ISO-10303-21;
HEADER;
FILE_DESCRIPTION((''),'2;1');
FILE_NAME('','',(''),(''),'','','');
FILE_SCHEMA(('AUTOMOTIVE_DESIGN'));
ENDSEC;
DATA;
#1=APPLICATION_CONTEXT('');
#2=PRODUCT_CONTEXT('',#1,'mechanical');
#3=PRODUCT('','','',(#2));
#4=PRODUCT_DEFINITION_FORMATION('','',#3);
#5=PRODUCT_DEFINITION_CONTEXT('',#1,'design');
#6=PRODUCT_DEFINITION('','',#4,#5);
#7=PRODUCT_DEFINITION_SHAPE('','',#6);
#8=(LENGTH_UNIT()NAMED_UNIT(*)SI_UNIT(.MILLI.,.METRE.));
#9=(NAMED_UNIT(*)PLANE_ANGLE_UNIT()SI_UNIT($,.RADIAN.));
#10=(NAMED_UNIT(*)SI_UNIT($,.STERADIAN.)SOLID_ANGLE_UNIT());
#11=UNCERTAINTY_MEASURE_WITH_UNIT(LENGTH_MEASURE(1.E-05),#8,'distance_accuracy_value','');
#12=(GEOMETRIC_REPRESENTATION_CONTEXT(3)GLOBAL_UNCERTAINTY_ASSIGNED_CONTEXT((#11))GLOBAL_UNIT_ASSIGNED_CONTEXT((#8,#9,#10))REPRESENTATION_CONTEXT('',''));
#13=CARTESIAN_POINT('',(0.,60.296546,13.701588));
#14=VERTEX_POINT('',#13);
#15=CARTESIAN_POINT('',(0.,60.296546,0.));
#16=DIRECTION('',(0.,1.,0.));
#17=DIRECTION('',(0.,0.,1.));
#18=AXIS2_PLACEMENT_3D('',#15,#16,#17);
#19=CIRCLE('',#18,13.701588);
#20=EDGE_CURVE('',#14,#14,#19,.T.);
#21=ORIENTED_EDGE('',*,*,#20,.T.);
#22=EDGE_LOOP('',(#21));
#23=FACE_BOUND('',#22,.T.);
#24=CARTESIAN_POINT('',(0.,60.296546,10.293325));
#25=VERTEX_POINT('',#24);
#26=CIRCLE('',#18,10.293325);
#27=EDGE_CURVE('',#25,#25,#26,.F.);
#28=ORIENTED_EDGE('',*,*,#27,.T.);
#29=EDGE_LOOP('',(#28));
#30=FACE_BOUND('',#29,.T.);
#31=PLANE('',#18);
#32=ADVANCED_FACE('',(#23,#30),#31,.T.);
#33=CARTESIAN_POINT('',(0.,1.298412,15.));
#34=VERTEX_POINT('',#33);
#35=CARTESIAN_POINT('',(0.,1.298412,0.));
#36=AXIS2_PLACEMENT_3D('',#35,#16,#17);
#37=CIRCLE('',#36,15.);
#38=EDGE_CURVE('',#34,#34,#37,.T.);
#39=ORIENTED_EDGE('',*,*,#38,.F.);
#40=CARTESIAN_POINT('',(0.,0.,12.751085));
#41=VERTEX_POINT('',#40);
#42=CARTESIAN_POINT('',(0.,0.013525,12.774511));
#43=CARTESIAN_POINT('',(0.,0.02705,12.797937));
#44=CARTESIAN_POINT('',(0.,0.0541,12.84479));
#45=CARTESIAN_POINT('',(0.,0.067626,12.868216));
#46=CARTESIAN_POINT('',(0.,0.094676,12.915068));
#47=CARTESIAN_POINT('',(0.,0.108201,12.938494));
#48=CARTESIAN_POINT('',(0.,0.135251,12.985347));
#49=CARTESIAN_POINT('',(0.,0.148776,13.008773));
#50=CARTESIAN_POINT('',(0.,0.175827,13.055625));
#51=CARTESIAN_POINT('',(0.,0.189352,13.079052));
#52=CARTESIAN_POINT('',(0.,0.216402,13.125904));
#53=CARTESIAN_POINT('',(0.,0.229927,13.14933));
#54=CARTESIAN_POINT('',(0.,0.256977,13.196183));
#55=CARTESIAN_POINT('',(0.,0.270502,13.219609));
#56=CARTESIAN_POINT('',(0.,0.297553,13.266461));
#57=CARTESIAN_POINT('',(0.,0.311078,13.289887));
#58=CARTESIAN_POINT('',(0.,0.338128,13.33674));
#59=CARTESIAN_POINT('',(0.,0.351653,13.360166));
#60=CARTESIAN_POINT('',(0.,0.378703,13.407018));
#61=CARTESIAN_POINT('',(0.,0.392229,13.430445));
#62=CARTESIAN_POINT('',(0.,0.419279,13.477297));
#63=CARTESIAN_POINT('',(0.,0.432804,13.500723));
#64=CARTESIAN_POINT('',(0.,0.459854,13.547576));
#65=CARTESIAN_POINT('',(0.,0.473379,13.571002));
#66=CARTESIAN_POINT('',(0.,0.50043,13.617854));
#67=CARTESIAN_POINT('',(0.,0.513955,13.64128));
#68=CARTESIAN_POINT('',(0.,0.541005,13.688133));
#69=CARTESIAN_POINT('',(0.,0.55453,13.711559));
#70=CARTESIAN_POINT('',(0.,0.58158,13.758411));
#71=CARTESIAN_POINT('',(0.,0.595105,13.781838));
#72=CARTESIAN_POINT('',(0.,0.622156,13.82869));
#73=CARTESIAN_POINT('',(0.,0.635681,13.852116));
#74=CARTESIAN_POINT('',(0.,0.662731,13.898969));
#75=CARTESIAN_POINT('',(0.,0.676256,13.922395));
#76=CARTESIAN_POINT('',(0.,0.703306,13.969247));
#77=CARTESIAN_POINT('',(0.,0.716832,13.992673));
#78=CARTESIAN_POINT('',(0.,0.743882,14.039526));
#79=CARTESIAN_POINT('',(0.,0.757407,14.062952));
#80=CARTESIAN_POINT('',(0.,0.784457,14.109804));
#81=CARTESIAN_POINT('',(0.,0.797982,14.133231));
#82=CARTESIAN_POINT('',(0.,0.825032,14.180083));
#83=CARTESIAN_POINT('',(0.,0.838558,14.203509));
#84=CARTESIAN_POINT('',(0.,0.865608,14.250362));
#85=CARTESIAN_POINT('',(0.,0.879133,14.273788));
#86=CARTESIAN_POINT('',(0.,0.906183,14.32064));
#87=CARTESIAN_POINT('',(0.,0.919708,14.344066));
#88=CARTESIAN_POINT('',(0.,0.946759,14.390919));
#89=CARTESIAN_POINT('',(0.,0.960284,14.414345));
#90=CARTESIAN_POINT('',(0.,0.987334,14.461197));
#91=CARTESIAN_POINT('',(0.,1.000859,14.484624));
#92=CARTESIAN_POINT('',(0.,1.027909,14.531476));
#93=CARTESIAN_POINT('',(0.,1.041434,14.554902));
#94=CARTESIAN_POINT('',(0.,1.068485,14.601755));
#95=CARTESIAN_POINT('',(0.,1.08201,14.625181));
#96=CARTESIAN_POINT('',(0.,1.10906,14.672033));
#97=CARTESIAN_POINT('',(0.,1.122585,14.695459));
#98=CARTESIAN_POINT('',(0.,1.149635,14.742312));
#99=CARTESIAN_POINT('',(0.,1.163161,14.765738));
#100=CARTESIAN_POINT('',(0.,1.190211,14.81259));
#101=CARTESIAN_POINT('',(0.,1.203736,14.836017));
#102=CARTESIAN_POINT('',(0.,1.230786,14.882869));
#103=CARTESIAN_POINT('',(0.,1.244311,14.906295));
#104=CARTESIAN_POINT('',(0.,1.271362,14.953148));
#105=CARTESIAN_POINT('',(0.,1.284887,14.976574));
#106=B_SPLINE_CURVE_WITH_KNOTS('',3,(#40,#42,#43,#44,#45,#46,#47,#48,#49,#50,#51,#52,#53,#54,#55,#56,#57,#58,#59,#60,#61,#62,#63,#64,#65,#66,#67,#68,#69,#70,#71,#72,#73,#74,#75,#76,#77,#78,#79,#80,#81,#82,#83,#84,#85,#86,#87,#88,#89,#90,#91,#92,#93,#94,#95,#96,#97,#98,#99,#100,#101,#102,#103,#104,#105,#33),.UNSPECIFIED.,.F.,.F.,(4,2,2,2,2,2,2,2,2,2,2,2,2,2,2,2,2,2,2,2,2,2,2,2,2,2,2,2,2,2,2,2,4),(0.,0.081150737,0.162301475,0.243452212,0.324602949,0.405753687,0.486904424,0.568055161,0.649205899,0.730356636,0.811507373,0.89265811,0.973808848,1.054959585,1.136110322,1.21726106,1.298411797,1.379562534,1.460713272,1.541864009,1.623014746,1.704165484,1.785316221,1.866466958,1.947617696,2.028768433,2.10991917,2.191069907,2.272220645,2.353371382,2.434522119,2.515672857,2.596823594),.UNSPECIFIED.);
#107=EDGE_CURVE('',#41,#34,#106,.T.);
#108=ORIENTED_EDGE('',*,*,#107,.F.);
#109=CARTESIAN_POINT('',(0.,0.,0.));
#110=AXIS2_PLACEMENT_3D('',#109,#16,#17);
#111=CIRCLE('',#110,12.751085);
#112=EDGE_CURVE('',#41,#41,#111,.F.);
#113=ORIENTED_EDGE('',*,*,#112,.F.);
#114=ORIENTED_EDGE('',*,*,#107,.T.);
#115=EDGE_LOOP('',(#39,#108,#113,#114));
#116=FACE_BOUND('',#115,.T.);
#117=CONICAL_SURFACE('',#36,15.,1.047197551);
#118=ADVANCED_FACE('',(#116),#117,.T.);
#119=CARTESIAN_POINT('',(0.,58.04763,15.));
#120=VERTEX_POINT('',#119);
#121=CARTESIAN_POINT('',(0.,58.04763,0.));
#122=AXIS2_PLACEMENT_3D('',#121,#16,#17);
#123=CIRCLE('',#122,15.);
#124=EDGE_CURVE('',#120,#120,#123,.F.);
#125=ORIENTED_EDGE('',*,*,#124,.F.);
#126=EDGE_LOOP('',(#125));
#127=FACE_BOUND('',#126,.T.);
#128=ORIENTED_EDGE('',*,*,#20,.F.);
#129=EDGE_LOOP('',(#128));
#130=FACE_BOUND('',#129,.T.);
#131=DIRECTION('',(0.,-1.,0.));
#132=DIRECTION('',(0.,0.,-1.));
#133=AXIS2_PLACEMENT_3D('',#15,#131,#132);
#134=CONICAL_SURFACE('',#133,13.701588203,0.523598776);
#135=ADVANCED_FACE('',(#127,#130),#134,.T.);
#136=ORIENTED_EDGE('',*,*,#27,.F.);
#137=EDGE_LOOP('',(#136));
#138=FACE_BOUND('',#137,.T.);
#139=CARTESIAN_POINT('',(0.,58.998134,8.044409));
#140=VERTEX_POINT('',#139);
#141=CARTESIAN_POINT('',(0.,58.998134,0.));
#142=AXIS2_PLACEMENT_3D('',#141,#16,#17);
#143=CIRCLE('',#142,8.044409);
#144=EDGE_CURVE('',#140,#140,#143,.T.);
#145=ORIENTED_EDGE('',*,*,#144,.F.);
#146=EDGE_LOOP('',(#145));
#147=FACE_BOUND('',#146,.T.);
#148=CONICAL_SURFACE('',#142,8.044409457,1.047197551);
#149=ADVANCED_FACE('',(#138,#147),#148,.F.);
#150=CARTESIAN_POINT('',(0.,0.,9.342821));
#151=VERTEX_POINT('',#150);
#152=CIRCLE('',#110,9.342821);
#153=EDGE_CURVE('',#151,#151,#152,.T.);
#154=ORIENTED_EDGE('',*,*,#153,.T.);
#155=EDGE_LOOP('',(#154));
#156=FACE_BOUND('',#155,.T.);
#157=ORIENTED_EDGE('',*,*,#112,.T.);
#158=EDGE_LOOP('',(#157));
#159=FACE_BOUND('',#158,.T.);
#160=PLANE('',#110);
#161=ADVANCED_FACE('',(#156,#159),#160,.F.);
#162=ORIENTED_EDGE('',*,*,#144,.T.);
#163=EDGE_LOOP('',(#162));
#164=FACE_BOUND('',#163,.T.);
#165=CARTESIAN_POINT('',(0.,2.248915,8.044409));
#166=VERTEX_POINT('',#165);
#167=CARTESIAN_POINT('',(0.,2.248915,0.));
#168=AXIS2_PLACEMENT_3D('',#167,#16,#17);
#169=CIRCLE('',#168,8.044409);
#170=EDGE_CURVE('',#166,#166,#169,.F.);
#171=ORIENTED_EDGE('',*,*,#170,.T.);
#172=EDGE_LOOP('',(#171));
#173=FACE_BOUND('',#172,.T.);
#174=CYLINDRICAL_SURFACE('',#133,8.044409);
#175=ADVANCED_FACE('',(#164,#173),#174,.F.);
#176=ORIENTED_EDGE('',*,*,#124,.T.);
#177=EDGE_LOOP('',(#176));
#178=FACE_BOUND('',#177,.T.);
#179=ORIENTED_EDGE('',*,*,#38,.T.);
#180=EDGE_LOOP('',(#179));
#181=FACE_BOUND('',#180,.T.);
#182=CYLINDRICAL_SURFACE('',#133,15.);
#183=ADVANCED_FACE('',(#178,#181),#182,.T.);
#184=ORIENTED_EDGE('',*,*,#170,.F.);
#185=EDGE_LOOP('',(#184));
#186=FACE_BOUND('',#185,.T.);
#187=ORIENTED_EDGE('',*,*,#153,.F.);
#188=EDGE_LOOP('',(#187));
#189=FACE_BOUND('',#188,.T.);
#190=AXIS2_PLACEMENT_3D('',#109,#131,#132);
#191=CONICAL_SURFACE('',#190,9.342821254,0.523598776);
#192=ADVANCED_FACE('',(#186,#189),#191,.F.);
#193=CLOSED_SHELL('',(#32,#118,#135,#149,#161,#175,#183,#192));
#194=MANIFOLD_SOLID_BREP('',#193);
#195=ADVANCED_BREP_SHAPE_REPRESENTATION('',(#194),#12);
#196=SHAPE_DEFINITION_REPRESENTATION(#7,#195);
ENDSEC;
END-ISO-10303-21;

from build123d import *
from OCP.BRepFilletAPI import BRepFilletAPI_MakeChamfer

# Parameters (mm, degrees)
SKETCH1_R           = 15
BOSS_EXTRUDE1_DEPTH = 60.296545634
SKETCH2_R           = 8.044409457
CUT_EXTRUDE1_DEPTH  = 64.919272644
CHAMFER1_SIZE       = 2.248915202
CHAMFER1_SIZE2      = 1.298411797


with BuildPart() as part:
    # Sketch1 → Boss-Extrude1 (new body)
    with BuildSketch(Plane(origin=(0, 0, 0), x_dir=(1, 0, 0), z_dir=(0, 1, 0))):
        Circle(SKETCH1_R)
    extrude(amount=BOSS_EXTRUDE1_DEPTH)

    # Sketch2 → Cut-Extrude1 (cut, through all)
    with BuildSketch(Plane(origin=(0, 0, 0), x_dir=(1, 0, 0), z_dir=(0, 1, 0))):
        Circle(SKETCH2_R)
    extrude(amount=CUT_EXTRUDE1_DEPTH, mode=Mode.SUBTRACT)

    # Chamfer1: one chamfer whose edges measure the first distance from different faces: ONE call of the kernel's chamfer builder (chamfer() names one face for all edges)
    chamfer1_edges_1 = [part.edges().sort_by_distance(p)[0] for p in [
        (-8.044409457, 60.296545634, 0),
    ]]
    chamfer1_side_1 = [part.faces().sort_by_distance(p)[0] for p in [
        (-14.575735931, 60.296545634, 0),
    ]]
    chamfer1_edges_2 = [part.edges().sort_by_distance(p)[0] for p in [
        (-8.044409457, 0, 0),
    ]]
    chamfer1_side_2 = [part.faces().sort_by_distance(p)[0] for p in [
        (-8.044409457, 30.148272817, 0),
    ]]
    chamfer1_edges_3 = [part.edges().sort_by_distance(p)[0] for p in [
        (-15, 0, 0),
    ]]
    chamfer1_side_3 = [part.faces().sort_by_distance(p)[0] for p in [
        (-14.575735931, 0, 0),
    ]]
    chamfer1_edges_4 = [part.edges().sort_by_distance(p)[0] for p in [
        (-15, 60.296545634, 0),
    ]]
    chamfer1_side_4 = [part.faces().sort_by_distance(p)[0] for p in [
        (-15, 30.148272817, 0),
    ]]
    chamfer1 = BRepFilletAPI_MakeChamfer(part.part.solid().wrapped)
    for e in chamfer1_edges_1:
        chamfer1.Add(CHAMFER1_SIZE, CHAMFER1_SIZE2, e.wrapped, chamfer1_side_1[0].wrapped)  # the first distance lies on this face
    for e in chamfer1_edges_2:
        chamfer1.Add(CHAMFER1_SIZE, CHAMFER1_SIZE2, e.wrapped, chamfer1_side_2[0].wrapped)  # the first distance lies on this face
    for e in chamfer1_edges_3:
        chamfer1.Add(CHAMFER1_SIZE, CHAMFER1_SIZE2, e.wrapped, chamfer1_side_3[0].wrapped)  # the first distance lies on this face
    for e in chamfer1_edges_4:
        chamfer1.Add(CHAMFER1_SIZE, CHAMFER1_SIZE2, e.wrapped, chamfer1_side_4[0].wrapped)  # the first distance lies on this face
    add(Compound.cast(chamfer1.Shape()), mode=Mode.REPLACE)


solid = part.part
